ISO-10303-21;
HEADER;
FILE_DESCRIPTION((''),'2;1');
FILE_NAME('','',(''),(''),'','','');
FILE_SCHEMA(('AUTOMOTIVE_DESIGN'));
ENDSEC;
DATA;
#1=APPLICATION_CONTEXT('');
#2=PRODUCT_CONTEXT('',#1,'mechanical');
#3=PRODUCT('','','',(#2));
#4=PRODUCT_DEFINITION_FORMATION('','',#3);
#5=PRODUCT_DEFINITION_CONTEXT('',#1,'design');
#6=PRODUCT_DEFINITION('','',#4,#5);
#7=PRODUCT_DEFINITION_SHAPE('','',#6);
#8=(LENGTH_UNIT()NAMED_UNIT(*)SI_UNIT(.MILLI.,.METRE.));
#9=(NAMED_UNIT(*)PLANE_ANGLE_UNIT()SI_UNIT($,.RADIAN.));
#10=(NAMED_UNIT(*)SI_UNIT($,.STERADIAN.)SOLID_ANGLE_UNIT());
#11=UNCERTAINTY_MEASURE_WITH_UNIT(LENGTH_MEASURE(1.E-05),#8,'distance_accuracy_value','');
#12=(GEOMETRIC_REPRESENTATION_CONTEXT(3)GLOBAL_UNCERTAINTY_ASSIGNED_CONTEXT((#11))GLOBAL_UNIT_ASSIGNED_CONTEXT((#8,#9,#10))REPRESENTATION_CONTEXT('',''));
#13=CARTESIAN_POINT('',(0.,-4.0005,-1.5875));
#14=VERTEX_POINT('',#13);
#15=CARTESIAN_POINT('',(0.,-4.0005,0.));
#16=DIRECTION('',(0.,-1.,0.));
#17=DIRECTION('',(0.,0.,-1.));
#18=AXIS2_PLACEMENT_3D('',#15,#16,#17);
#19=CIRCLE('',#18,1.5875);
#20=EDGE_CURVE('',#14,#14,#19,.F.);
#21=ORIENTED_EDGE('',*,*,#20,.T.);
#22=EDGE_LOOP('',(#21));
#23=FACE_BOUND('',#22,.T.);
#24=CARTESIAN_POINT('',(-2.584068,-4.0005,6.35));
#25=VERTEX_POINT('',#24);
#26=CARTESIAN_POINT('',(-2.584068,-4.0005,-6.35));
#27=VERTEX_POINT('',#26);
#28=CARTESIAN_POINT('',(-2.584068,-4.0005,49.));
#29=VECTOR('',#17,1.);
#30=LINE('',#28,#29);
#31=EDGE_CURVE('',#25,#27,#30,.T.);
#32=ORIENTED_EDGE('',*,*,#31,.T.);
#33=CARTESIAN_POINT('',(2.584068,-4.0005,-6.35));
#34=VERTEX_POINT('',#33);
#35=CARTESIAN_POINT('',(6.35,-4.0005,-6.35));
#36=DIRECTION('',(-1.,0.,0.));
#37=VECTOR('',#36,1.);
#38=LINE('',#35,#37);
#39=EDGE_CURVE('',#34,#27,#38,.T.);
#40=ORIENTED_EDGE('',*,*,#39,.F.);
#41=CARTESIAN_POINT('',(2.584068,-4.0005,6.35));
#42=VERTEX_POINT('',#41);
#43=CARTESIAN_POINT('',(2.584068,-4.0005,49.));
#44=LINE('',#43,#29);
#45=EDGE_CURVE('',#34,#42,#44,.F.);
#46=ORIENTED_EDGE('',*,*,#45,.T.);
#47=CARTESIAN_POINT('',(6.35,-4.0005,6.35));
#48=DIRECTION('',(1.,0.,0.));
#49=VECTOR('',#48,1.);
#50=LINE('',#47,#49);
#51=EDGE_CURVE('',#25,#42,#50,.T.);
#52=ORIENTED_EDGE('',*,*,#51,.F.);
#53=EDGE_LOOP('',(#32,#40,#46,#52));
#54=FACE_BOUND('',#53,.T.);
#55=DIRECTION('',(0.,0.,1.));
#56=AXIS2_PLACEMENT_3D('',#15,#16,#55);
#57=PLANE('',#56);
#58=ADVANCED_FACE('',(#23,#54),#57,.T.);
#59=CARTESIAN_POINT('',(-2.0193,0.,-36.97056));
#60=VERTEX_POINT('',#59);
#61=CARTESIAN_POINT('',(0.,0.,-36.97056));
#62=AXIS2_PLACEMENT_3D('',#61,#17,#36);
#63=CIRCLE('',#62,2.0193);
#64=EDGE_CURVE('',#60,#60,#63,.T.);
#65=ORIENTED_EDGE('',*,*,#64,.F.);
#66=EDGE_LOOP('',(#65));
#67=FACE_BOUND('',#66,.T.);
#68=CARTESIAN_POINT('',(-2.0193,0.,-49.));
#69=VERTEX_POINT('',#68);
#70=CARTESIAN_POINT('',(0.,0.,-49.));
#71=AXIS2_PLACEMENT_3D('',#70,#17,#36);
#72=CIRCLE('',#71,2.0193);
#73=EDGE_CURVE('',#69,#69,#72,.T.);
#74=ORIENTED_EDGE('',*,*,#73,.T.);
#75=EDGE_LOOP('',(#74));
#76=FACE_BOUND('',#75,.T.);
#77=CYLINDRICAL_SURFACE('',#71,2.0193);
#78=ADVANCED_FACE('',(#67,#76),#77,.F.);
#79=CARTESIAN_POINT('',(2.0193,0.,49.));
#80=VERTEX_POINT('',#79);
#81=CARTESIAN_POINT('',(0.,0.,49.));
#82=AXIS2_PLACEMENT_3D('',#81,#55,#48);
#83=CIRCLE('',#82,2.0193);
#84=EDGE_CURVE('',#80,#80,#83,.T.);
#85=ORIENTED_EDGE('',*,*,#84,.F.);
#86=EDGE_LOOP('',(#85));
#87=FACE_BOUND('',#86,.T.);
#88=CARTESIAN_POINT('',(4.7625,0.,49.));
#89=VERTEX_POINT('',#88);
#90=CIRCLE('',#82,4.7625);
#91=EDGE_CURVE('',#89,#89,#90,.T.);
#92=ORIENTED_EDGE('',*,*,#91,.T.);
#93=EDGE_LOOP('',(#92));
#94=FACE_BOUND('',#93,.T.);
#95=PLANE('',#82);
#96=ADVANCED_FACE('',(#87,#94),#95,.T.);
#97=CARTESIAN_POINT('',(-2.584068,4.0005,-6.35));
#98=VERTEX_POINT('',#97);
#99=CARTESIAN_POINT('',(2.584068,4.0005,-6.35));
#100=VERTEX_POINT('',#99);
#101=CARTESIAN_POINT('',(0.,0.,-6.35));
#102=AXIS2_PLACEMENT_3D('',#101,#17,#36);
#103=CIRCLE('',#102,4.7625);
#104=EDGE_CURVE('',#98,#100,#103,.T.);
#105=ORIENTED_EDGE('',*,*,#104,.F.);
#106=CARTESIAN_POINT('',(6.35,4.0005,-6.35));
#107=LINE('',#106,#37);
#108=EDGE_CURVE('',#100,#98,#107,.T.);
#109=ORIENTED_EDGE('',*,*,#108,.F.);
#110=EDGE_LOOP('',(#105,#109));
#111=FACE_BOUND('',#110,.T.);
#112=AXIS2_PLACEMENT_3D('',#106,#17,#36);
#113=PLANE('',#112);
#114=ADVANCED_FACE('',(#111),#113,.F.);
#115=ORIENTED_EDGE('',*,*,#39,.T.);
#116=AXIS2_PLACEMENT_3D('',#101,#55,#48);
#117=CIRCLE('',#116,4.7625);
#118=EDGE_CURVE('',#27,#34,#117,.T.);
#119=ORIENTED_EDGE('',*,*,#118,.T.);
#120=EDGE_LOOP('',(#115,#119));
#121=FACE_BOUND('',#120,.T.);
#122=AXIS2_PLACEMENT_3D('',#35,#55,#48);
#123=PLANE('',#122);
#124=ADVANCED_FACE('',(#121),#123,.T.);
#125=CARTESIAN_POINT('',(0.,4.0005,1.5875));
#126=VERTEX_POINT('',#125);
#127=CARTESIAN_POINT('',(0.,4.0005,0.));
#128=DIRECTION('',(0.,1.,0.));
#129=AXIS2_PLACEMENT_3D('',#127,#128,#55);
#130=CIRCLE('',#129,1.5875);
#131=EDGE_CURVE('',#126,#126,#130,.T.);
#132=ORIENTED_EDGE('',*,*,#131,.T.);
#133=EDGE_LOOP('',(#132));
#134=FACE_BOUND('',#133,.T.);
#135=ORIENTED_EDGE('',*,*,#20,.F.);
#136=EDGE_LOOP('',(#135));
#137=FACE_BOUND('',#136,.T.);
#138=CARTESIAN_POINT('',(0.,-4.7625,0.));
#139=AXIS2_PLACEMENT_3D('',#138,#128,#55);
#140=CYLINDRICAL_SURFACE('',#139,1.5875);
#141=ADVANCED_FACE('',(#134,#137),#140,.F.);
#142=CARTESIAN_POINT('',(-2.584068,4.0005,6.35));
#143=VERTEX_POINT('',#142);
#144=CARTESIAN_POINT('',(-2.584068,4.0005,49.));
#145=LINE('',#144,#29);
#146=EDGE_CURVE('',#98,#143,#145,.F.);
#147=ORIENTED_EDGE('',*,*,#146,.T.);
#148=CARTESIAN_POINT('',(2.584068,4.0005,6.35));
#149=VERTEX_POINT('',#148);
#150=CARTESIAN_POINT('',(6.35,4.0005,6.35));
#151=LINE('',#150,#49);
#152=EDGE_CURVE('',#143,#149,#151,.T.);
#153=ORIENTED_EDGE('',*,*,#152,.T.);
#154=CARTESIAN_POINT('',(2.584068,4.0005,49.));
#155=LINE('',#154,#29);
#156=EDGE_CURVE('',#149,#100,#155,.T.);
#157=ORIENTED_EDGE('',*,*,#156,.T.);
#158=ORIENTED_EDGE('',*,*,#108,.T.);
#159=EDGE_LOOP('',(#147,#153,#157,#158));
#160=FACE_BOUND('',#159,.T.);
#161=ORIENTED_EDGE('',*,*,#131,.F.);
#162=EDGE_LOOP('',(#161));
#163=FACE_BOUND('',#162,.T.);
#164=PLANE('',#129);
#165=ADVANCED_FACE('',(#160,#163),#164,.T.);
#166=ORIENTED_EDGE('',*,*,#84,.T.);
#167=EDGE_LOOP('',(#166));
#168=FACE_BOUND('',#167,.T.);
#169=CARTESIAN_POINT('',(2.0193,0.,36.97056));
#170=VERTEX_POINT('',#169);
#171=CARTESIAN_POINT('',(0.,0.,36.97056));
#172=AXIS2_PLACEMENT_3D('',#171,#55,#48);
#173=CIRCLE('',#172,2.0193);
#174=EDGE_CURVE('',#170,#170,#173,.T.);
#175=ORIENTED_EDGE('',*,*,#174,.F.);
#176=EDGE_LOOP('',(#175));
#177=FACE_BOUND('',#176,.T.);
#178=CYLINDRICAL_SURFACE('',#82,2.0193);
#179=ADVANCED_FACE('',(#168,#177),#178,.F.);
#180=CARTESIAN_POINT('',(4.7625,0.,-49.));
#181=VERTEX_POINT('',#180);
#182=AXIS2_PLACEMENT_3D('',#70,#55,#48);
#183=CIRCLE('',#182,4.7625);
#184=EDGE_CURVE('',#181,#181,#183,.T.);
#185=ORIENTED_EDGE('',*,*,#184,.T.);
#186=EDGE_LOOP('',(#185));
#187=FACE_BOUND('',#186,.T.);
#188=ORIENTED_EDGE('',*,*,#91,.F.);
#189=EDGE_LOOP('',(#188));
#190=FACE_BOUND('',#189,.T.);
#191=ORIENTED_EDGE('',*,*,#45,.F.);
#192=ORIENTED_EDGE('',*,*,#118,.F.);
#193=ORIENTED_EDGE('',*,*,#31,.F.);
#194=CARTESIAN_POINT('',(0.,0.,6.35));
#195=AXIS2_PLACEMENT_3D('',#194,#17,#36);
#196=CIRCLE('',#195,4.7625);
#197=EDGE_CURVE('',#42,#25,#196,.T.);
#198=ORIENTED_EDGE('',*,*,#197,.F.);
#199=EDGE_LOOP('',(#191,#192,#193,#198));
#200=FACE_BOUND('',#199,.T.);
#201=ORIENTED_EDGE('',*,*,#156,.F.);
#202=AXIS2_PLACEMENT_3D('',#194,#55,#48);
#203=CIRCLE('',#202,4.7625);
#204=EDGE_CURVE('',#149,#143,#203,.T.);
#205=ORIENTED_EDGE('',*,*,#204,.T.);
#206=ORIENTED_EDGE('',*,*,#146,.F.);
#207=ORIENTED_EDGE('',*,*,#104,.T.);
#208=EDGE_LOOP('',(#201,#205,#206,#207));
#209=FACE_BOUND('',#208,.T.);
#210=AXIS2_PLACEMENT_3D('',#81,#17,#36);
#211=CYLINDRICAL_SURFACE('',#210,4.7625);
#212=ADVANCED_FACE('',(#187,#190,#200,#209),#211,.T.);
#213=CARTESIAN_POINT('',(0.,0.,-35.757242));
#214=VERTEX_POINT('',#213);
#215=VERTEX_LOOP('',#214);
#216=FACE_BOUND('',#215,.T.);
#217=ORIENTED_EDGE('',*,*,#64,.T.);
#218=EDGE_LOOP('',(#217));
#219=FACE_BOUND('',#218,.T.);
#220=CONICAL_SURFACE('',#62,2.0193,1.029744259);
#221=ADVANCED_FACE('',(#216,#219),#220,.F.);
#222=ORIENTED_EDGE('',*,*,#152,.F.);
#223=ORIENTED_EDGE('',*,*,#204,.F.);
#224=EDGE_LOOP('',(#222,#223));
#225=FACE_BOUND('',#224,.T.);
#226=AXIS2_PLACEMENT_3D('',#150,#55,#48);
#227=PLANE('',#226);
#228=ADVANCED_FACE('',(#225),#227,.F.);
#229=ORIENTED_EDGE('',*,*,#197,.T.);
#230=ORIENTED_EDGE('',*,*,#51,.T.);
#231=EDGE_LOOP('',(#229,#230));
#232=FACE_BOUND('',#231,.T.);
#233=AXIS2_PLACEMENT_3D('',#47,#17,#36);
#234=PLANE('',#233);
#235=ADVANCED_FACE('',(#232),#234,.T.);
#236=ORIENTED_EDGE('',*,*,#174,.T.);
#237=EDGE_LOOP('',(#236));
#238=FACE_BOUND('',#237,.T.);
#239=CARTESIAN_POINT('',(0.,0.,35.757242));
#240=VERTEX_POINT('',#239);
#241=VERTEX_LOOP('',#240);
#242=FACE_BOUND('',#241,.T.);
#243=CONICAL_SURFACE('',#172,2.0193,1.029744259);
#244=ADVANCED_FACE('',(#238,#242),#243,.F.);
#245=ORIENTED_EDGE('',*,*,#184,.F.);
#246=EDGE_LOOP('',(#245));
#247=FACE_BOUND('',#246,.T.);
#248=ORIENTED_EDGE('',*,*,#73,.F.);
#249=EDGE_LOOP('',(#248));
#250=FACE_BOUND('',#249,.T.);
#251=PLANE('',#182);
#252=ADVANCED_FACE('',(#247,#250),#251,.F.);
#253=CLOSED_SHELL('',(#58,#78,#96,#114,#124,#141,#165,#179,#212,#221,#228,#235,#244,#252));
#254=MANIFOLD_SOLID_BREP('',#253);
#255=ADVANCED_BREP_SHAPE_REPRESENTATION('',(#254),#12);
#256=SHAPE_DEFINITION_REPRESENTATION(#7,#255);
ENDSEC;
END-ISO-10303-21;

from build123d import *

# Parameters (mm, degrees)
SKETCH1_R           = 4.7625
BOSS_EXTRUDE1_DEPTH = 49.000000044
SKETCH4_W           = 12.7
SKETCH4_H           = 12.7
CUT_EXTRUDE1_DEPTH  = 0.762
SKETCH5_R           = 1.5875
CUT_EXTRUDE2_DEPTH  = 51.004715573


# Read off the part's stored shape, not the designer's step: #10-32 Tapped Hole1
with BuildPart() as part:
    # Sketch1 → Boss-Extrude1 (new, symmetric)
    with BuildSketch(Plane.XY):
        Circle(SKETCH1_R)
    extrude(amount=BOSS_EXTRUDE1_DEPTH, both=True)

    # #10-32 Tapped Hole1 outline → #10-32 Tapped Hole1 (revolve, cut)
    with BuildSketch(Plane.XZ):
        Polygon((2.0193, -36.970560044), (0, -35.757242196), (0, -49.000000044), (2.0193, -49.000000044), align=None)
        Polygon((0, 49.000000044), (0, 35.757242196), (2.0193, 36.970560044), (2.0193, 49.000000044), align=None)
    revolve(axis=Axis((0, 0, 0), (0, 0, 1)), mode=Mode.SUBTRACT)

    # Sketch4 → Cut-Extrude1 (cut)
    with BuildSketch(Plane(origin=(0, 4.7625, 0), x_dir=(1, 0, 0), z_dir=(0, 1, 0))):
        Rectangle(SKETCH4_W, SKETCH4_H)
    cut_extrude1 = extrude(amount=-CUT_EXTRUDE1_DEPTH, mode=Mode.SUBTRACT)

    # Sketch5 → Cut-Extrude2 (cut, through all)
    with BuildSketch(Plane(origin=(0, 4.0005, 0), x_dir=(1, 0, 0), z_dir=(0, 1, 0))):
        with Locations(Location((0, 0, 0), (0, 0, 270))):
            Circle(SKETCH5_R)
    extrude(amount=-CUT_EXTRUDE2_DEPTH, mode=Mode.SUBTRACT)

    # Mirror1: Cut-Extrude1 across plane
    add(cut_extrude1.mirror(Plane.ZX), mode=Mode.SUBTRACT)


solid = part.part
